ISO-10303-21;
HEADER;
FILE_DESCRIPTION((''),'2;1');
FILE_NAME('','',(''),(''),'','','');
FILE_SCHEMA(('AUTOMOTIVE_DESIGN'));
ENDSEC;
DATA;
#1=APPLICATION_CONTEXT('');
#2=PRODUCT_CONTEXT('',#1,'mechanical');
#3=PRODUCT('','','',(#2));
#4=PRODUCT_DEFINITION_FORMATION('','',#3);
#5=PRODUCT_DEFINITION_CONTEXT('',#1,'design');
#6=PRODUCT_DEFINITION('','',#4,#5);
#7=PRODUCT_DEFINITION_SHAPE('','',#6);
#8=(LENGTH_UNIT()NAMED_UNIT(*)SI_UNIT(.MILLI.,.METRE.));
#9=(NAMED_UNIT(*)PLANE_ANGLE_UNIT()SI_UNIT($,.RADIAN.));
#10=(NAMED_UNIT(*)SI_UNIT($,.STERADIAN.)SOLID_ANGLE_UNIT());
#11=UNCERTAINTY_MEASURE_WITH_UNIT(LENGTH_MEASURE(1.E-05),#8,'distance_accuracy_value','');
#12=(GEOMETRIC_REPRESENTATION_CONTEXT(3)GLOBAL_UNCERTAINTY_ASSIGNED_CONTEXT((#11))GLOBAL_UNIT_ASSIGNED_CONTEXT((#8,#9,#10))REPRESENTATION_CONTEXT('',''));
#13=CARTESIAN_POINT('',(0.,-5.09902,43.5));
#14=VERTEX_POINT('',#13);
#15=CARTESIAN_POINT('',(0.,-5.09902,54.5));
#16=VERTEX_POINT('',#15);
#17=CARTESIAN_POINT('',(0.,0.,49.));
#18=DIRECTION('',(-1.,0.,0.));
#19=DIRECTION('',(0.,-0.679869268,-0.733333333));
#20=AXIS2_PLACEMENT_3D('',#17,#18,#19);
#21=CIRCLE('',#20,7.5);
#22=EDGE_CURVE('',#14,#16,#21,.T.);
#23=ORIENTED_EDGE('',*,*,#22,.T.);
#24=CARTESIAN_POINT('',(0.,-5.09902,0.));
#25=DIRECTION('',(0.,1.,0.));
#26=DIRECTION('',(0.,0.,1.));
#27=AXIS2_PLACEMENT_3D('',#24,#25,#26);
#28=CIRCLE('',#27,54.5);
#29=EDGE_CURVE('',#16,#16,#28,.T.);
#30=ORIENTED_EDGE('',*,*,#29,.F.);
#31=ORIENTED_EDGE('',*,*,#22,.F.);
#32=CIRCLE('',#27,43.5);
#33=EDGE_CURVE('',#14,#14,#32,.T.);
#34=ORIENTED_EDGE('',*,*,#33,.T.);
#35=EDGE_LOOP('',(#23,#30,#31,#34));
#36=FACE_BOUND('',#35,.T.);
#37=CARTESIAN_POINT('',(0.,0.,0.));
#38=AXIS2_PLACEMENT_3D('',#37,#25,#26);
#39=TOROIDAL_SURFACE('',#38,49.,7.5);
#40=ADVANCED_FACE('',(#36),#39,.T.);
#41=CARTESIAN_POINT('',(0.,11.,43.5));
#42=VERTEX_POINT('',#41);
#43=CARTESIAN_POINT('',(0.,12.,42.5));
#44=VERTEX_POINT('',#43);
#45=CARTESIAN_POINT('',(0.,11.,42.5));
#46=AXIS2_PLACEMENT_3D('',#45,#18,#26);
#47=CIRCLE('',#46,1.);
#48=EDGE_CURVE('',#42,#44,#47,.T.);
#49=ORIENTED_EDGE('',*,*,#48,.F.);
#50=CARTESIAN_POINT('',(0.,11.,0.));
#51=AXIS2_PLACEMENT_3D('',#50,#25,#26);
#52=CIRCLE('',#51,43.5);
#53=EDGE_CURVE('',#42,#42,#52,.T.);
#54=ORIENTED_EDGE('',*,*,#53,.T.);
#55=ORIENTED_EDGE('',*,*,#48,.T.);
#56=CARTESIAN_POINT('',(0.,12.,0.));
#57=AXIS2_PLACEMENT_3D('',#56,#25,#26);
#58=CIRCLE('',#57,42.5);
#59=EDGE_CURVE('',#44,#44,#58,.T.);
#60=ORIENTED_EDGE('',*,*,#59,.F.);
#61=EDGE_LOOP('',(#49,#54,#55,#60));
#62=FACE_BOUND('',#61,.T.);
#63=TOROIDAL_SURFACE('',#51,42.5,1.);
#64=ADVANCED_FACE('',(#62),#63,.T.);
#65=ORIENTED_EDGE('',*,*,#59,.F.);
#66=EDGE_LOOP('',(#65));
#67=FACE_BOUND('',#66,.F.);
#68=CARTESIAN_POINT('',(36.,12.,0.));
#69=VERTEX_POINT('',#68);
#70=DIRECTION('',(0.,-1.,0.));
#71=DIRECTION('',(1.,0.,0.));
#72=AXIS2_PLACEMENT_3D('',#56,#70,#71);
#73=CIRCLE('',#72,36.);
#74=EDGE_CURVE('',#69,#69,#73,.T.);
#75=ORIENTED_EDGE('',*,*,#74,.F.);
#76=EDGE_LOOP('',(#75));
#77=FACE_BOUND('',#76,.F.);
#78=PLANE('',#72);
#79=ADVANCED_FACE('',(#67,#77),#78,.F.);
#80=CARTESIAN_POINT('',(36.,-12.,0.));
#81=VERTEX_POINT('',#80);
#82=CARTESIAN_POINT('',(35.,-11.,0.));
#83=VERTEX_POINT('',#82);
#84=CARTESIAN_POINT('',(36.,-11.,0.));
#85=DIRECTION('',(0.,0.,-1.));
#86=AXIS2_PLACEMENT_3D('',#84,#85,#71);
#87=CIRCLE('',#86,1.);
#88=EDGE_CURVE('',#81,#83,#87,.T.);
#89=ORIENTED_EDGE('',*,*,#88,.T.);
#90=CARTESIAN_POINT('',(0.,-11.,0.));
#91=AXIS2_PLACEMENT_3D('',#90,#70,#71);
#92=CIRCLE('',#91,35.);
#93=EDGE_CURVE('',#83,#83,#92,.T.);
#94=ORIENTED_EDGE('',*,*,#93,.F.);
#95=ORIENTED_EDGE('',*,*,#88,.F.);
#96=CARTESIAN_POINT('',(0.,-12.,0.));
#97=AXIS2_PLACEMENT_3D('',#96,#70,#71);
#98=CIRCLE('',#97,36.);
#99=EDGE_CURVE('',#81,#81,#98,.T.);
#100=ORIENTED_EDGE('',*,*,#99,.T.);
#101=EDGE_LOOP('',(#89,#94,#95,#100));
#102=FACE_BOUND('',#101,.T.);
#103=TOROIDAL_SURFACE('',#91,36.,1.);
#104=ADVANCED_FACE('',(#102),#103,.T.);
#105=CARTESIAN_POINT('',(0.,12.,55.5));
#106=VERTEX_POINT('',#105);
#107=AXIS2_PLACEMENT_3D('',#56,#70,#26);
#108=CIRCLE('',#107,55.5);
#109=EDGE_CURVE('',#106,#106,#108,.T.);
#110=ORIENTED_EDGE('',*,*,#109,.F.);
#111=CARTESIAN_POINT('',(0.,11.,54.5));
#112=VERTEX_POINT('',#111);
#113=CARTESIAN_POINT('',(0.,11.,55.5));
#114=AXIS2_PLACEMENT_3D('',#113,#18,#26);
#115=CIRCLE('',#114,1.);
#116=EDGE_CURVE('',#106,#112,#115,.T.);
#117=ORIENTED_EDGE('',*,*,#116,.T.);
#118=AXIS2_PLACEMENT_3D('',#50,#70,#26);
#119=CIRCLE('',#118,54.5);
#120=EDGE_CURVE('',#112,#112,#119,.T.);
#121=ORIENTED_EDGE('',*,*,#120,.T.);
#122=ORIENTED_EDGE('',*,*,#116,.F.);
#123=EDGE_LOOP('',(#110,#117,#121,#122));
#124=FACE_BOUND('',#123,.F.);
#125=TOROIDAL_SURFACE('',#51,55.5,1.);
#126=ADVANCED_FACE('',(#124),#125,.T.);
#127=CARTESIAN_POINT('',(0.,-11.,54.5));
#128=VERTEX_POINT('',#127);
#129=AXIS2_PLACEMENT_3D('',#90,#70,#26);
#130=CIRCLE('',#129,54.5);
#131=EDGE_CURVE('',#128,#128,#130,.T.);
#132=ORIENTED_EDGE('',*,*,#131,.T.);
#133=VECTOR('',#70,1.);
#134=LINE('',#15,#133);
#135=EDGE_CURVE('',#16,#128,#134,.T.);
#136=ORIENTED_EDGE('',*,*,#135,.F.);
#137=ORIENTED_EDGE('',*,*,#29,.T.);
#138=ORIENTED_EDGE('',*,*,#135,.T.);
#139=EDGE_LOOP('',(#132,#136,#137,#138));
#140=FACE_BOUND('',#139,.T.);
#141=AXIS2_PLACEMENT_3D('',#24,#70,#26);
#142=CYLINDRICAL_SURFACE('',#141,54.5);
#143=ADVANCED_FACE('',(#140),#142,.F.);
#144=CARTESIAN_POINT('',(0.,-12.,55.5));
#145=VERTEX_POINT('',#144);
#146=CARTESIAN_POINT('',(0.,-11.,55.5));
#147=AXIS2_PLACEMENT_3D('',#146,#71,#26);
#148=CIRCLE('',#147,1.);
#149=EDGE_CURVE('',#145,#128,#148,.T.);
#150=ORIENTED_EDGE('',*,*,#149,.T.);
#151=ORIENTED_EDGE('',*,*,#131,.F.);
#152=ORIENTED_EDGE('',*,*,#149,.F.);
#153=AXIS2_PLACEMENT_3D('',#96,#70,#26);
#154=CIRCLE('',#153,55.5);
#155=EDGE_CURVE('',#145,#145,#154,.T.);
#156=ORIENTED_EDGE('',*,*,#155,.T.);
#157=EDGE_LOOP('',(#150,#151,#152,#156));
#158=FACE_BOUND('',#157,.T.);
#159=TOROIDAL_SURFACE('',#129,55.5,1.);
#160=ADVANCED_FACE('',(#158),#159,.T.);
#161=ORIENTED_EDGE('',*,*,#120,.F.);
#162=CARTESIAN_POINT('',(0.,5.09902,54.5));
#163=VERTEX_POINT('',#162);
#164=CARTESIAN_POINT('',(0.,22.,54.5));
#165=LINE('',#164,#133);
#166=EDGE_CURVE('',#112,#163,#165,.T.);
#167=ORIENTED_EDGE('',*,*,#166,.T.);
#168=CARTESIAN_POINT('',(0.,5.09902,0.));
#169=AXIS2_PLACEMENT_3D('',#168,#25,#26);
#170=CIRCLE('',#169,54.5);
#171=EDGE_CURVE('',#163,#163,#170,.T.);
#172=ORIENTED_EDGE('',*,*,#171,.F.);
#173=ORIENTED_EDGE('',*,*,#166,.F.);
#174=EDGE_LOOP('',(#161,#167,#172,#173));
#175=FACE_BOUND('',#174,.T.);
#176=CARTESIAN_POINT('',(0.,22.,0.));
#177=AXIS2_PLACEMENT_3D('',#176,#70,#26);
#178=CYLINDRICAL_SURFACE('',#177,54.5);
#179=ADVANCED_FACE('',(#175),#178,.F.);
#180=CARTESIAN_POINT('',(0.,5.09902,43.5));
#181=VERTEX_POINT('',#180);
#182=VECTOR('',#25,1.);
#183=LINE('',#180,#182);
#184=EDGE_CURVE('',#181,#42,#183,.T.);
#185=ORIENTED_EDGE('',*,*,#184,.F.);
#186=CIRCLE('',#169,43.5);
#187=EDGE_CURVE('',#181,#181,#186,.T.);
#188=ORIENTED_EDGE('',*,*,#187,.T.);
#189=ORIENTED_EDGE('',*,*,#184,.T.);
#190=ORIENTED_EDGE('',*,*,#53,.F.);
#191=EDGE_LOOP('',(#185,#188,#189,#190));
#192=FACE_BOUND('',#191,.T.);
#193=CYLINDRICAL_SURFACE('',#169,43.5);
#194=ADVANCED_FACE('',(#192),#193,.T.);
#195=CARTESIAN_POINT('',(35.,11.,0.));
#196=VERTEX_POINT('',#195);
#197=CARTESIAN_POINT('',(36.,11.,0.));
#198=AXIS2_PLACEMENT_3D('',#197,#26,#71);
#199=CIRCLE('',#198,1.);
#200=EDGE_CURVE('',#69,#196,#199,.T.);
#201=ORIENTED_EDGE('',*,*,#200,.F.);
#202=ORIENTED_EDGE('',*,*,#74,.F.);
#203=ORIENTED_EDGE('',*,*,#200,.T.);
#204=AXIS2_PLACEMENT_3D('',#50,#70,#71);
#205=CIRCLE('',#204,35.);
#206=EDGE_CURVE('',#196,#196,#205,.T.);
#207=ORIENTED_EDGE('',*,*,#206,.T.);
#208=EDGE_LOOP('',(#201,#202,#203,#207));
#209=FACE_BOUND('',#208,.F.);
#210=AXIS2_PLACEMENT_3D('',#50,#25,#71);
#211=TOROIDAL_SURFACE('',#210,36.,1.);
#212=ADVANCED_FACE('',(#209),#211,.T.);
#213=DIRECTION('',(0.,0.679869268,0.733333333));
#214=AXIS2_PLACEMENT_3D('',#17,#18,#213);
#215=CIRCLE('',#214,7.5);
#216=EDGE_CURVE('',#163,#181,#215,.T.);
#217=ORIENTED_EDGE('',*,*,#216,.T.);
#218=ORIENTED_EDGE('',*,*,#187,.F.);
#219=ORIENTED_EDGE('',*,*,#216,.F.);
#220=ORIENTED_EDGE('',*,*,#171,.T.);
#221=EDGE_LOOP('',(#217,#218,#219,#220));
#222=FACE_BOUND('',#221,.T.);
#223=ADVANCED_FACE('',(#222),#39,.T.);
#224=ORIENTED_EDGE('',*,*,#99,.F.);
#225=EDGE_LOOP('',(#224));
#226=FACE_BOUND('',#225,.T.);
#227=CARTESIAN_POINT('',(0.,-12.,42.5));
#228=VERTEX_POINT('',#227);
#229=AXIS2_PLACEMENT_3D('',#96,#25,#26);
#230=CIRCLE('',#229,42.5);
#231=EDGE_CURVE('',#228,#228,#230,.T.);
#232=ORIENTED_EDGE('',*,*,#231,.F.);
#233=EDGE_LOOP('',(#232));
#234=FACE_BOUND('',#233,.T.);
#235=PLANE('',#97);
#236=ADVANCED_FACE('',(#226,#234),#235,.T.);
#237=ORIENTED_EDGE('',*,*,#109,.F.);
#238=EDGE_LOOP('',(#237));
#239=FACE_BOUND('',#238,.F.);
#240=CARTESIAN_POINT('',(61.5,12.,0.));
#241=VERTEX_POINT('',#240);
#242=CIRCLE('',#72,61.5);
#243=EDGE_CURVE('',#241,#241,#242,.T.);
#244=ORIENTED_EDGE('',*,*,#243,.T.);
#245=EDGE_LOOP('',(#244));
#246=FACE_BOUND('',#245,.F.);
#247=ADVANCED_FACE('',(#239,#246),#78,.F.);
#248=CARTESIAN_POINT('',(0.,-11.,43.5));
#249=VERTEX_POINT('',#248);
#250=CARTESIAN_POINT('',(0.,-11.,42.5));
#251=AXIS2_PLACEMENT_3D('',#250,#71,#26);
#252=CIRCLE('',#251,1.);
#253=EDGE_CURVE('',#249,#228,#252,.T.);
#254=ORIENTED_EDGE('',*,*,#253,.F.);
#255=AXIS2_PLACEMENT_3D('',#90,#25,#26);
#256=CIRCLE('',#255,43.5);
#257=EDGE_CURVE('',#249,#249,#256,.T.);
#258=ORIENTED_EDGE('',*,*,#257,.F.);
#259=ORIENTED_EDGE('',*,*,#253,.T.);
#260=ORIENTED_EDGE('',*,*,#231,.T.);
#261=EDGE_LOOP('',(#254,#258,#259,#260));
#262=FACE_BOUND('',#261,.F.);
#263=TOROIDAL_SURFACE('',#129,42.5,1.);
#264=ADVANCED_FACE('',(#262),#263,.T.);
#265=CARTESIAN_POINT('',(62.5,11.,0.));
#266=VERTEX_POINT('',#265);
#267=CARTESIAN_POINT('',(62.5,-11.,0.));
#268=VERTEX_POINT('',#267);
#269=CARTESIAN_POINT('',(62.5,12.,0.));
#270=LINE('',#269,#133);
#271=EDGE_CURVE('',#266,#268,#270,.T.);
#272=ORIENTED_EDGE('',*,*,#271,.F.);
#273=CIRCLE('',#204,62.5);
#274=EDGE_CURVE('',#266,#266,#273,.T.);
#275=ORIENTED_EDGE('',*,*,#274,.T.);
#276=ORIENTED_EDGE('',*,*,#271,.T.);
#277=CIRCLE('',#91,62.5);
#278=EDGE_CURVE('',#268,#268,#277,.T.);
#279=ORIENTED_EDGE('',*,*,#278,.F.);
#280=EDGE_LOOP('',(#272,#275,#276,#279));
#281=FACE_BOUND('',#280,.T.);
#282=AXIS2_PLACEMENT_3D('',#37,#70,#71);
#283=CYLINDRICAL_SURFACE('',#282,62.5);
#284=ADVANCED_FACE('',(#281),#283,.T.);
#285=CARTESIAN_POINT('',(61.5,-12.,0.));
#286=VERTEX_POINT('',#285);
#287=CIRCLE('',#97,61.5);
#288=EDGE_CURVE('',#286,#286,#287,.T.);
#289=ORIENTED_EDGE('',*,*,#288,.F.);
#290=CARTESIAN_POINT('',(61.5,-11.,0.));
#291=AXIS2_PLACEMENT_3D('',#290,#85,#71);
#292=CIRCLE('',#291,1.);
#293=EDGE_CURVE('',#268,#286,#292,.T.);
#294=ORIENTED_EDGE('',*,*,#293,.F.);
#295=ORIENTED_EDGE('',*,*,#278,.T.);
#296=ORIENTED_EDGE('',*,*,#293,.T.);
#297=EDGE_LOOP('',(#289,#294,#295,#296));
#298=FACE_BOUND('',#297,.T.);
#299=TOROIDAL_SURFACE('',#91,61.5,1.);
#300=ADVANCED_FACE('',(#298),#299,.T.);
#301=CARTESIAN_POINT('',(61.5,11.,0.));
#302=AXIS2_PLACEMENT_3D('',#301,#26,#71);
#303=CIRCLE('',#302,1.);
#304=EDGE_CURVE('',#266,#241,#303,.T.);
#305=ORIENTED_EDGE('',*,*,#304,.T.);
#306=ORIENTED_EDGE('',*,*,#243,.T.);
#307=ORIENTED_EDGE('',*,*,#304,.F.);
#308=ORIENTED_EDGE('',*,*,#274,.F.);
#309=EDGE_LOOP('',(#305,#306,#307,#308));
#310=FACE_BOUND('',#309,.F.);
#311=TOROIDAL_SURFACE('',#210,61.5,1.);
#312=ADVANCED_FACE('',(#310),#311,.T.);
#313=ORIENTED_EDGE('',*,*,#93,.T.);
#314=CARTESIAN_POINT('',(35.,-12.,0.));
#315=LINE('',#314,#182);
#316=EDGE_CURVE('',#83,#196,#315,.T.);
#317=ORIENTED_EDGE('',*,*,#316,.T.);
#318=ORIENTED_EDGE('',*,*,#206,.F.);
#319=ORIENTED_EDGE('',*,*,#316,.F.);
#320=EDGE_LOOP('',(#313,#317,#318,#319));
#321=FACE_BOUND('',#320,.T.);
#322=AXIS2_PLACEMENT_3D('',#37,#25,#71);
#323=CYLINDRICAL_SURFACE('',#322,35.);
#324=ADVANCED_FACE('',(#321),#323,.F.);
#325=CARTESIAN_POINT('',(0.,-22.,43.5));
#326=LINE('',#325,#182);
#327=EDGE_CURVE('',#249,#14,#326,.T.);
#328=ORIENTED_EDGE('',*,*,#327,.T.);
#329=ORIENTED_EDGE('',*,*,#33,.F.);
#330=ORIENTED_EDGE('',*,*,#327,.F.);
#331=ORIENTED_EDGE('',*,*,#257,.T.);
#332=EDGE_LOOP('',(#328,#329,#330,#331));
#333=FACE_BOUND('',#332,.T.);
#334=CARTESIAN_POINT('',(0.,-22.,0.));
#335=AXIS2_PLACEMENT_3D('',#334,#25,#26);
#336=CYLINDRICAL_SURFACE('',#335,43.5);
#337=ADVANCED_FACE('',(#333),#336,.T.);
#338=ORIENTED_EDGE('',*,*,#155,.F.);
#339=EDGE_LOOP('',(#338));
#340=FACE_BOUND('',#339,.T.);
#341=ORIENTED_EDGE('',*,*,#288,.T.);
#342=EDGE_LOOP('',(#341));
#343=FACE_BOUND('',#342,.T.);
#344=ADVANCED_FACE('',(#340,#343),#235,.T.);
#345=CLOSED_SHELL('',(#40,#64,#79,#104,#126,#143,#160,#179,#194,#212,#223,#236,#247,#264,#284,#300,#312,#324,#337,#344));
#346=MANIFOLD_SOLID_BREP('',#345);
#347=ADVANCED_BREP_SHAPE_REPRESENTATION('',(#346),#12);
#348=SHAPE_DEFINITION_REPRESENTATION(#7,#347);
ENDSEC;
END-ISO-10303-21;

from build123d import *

# Parameters (mm, degrees)
F0_R     = 62.5
F0_R_2   = 35
F1_DEPTH = 12
F4_R     = 1


with BuildPart() as f1:
    # F0 (on Front) → F1 (new body, symmetric)
    with BuildSketch(Plane.XZ):
        Circle(F0_R)
        Circle(F0_R_2, mode=Mode.SUBTRACT)
    extrude(amount=F1_DEPTH, both=True)

    # F2 (on Right) → F3 (revolve, cut)
    with BuildSketch(Plane.YZ):
        with BuildLine():
            Line((-5.0990195136, 54.5), (-22, 54.5))
            Line((-22, 54.5), (-22, 43.5))
            Line((-22, 43.5), (-5.0990195136, 43.5))
            ThreePointArc((-5.0990195136, 43.5), (-7.5, 49), (-5.0990195136, 54.5))
        make_face()
        with BuildLine():
            Line((22, 43.5), (22, 54.5))
            Line((22, 54.5), (5.0990195136, 54.5))
            ThreePointArc((5.0990195136, 54.5), (7.5, 49), (5.0990195136, 43.5))
            Line((5.0990195136, 43.5), (22, 43.5))
        make_face()
    revolve(axis=Axis((0, 16.4881043163, 0), (0, 1, 0)), mode=Mode.SUBTRACT)

    # F4
    f4_edges = [f1.edges().sort_by_distance(p)[0] for p in [
        (-62.5, 12, 0),
        (-62.5, -12, 0),
        (-35, 12, 0),
        (-35, -12, 0),
        (0, -12, -54.5),
        (0, -12, -43.5),
        (0, 12, -54.5),
        (0, 12, -43.5),
    ]]
    fillet(f4_edges, radius=F4_R)


solid = f1.part
